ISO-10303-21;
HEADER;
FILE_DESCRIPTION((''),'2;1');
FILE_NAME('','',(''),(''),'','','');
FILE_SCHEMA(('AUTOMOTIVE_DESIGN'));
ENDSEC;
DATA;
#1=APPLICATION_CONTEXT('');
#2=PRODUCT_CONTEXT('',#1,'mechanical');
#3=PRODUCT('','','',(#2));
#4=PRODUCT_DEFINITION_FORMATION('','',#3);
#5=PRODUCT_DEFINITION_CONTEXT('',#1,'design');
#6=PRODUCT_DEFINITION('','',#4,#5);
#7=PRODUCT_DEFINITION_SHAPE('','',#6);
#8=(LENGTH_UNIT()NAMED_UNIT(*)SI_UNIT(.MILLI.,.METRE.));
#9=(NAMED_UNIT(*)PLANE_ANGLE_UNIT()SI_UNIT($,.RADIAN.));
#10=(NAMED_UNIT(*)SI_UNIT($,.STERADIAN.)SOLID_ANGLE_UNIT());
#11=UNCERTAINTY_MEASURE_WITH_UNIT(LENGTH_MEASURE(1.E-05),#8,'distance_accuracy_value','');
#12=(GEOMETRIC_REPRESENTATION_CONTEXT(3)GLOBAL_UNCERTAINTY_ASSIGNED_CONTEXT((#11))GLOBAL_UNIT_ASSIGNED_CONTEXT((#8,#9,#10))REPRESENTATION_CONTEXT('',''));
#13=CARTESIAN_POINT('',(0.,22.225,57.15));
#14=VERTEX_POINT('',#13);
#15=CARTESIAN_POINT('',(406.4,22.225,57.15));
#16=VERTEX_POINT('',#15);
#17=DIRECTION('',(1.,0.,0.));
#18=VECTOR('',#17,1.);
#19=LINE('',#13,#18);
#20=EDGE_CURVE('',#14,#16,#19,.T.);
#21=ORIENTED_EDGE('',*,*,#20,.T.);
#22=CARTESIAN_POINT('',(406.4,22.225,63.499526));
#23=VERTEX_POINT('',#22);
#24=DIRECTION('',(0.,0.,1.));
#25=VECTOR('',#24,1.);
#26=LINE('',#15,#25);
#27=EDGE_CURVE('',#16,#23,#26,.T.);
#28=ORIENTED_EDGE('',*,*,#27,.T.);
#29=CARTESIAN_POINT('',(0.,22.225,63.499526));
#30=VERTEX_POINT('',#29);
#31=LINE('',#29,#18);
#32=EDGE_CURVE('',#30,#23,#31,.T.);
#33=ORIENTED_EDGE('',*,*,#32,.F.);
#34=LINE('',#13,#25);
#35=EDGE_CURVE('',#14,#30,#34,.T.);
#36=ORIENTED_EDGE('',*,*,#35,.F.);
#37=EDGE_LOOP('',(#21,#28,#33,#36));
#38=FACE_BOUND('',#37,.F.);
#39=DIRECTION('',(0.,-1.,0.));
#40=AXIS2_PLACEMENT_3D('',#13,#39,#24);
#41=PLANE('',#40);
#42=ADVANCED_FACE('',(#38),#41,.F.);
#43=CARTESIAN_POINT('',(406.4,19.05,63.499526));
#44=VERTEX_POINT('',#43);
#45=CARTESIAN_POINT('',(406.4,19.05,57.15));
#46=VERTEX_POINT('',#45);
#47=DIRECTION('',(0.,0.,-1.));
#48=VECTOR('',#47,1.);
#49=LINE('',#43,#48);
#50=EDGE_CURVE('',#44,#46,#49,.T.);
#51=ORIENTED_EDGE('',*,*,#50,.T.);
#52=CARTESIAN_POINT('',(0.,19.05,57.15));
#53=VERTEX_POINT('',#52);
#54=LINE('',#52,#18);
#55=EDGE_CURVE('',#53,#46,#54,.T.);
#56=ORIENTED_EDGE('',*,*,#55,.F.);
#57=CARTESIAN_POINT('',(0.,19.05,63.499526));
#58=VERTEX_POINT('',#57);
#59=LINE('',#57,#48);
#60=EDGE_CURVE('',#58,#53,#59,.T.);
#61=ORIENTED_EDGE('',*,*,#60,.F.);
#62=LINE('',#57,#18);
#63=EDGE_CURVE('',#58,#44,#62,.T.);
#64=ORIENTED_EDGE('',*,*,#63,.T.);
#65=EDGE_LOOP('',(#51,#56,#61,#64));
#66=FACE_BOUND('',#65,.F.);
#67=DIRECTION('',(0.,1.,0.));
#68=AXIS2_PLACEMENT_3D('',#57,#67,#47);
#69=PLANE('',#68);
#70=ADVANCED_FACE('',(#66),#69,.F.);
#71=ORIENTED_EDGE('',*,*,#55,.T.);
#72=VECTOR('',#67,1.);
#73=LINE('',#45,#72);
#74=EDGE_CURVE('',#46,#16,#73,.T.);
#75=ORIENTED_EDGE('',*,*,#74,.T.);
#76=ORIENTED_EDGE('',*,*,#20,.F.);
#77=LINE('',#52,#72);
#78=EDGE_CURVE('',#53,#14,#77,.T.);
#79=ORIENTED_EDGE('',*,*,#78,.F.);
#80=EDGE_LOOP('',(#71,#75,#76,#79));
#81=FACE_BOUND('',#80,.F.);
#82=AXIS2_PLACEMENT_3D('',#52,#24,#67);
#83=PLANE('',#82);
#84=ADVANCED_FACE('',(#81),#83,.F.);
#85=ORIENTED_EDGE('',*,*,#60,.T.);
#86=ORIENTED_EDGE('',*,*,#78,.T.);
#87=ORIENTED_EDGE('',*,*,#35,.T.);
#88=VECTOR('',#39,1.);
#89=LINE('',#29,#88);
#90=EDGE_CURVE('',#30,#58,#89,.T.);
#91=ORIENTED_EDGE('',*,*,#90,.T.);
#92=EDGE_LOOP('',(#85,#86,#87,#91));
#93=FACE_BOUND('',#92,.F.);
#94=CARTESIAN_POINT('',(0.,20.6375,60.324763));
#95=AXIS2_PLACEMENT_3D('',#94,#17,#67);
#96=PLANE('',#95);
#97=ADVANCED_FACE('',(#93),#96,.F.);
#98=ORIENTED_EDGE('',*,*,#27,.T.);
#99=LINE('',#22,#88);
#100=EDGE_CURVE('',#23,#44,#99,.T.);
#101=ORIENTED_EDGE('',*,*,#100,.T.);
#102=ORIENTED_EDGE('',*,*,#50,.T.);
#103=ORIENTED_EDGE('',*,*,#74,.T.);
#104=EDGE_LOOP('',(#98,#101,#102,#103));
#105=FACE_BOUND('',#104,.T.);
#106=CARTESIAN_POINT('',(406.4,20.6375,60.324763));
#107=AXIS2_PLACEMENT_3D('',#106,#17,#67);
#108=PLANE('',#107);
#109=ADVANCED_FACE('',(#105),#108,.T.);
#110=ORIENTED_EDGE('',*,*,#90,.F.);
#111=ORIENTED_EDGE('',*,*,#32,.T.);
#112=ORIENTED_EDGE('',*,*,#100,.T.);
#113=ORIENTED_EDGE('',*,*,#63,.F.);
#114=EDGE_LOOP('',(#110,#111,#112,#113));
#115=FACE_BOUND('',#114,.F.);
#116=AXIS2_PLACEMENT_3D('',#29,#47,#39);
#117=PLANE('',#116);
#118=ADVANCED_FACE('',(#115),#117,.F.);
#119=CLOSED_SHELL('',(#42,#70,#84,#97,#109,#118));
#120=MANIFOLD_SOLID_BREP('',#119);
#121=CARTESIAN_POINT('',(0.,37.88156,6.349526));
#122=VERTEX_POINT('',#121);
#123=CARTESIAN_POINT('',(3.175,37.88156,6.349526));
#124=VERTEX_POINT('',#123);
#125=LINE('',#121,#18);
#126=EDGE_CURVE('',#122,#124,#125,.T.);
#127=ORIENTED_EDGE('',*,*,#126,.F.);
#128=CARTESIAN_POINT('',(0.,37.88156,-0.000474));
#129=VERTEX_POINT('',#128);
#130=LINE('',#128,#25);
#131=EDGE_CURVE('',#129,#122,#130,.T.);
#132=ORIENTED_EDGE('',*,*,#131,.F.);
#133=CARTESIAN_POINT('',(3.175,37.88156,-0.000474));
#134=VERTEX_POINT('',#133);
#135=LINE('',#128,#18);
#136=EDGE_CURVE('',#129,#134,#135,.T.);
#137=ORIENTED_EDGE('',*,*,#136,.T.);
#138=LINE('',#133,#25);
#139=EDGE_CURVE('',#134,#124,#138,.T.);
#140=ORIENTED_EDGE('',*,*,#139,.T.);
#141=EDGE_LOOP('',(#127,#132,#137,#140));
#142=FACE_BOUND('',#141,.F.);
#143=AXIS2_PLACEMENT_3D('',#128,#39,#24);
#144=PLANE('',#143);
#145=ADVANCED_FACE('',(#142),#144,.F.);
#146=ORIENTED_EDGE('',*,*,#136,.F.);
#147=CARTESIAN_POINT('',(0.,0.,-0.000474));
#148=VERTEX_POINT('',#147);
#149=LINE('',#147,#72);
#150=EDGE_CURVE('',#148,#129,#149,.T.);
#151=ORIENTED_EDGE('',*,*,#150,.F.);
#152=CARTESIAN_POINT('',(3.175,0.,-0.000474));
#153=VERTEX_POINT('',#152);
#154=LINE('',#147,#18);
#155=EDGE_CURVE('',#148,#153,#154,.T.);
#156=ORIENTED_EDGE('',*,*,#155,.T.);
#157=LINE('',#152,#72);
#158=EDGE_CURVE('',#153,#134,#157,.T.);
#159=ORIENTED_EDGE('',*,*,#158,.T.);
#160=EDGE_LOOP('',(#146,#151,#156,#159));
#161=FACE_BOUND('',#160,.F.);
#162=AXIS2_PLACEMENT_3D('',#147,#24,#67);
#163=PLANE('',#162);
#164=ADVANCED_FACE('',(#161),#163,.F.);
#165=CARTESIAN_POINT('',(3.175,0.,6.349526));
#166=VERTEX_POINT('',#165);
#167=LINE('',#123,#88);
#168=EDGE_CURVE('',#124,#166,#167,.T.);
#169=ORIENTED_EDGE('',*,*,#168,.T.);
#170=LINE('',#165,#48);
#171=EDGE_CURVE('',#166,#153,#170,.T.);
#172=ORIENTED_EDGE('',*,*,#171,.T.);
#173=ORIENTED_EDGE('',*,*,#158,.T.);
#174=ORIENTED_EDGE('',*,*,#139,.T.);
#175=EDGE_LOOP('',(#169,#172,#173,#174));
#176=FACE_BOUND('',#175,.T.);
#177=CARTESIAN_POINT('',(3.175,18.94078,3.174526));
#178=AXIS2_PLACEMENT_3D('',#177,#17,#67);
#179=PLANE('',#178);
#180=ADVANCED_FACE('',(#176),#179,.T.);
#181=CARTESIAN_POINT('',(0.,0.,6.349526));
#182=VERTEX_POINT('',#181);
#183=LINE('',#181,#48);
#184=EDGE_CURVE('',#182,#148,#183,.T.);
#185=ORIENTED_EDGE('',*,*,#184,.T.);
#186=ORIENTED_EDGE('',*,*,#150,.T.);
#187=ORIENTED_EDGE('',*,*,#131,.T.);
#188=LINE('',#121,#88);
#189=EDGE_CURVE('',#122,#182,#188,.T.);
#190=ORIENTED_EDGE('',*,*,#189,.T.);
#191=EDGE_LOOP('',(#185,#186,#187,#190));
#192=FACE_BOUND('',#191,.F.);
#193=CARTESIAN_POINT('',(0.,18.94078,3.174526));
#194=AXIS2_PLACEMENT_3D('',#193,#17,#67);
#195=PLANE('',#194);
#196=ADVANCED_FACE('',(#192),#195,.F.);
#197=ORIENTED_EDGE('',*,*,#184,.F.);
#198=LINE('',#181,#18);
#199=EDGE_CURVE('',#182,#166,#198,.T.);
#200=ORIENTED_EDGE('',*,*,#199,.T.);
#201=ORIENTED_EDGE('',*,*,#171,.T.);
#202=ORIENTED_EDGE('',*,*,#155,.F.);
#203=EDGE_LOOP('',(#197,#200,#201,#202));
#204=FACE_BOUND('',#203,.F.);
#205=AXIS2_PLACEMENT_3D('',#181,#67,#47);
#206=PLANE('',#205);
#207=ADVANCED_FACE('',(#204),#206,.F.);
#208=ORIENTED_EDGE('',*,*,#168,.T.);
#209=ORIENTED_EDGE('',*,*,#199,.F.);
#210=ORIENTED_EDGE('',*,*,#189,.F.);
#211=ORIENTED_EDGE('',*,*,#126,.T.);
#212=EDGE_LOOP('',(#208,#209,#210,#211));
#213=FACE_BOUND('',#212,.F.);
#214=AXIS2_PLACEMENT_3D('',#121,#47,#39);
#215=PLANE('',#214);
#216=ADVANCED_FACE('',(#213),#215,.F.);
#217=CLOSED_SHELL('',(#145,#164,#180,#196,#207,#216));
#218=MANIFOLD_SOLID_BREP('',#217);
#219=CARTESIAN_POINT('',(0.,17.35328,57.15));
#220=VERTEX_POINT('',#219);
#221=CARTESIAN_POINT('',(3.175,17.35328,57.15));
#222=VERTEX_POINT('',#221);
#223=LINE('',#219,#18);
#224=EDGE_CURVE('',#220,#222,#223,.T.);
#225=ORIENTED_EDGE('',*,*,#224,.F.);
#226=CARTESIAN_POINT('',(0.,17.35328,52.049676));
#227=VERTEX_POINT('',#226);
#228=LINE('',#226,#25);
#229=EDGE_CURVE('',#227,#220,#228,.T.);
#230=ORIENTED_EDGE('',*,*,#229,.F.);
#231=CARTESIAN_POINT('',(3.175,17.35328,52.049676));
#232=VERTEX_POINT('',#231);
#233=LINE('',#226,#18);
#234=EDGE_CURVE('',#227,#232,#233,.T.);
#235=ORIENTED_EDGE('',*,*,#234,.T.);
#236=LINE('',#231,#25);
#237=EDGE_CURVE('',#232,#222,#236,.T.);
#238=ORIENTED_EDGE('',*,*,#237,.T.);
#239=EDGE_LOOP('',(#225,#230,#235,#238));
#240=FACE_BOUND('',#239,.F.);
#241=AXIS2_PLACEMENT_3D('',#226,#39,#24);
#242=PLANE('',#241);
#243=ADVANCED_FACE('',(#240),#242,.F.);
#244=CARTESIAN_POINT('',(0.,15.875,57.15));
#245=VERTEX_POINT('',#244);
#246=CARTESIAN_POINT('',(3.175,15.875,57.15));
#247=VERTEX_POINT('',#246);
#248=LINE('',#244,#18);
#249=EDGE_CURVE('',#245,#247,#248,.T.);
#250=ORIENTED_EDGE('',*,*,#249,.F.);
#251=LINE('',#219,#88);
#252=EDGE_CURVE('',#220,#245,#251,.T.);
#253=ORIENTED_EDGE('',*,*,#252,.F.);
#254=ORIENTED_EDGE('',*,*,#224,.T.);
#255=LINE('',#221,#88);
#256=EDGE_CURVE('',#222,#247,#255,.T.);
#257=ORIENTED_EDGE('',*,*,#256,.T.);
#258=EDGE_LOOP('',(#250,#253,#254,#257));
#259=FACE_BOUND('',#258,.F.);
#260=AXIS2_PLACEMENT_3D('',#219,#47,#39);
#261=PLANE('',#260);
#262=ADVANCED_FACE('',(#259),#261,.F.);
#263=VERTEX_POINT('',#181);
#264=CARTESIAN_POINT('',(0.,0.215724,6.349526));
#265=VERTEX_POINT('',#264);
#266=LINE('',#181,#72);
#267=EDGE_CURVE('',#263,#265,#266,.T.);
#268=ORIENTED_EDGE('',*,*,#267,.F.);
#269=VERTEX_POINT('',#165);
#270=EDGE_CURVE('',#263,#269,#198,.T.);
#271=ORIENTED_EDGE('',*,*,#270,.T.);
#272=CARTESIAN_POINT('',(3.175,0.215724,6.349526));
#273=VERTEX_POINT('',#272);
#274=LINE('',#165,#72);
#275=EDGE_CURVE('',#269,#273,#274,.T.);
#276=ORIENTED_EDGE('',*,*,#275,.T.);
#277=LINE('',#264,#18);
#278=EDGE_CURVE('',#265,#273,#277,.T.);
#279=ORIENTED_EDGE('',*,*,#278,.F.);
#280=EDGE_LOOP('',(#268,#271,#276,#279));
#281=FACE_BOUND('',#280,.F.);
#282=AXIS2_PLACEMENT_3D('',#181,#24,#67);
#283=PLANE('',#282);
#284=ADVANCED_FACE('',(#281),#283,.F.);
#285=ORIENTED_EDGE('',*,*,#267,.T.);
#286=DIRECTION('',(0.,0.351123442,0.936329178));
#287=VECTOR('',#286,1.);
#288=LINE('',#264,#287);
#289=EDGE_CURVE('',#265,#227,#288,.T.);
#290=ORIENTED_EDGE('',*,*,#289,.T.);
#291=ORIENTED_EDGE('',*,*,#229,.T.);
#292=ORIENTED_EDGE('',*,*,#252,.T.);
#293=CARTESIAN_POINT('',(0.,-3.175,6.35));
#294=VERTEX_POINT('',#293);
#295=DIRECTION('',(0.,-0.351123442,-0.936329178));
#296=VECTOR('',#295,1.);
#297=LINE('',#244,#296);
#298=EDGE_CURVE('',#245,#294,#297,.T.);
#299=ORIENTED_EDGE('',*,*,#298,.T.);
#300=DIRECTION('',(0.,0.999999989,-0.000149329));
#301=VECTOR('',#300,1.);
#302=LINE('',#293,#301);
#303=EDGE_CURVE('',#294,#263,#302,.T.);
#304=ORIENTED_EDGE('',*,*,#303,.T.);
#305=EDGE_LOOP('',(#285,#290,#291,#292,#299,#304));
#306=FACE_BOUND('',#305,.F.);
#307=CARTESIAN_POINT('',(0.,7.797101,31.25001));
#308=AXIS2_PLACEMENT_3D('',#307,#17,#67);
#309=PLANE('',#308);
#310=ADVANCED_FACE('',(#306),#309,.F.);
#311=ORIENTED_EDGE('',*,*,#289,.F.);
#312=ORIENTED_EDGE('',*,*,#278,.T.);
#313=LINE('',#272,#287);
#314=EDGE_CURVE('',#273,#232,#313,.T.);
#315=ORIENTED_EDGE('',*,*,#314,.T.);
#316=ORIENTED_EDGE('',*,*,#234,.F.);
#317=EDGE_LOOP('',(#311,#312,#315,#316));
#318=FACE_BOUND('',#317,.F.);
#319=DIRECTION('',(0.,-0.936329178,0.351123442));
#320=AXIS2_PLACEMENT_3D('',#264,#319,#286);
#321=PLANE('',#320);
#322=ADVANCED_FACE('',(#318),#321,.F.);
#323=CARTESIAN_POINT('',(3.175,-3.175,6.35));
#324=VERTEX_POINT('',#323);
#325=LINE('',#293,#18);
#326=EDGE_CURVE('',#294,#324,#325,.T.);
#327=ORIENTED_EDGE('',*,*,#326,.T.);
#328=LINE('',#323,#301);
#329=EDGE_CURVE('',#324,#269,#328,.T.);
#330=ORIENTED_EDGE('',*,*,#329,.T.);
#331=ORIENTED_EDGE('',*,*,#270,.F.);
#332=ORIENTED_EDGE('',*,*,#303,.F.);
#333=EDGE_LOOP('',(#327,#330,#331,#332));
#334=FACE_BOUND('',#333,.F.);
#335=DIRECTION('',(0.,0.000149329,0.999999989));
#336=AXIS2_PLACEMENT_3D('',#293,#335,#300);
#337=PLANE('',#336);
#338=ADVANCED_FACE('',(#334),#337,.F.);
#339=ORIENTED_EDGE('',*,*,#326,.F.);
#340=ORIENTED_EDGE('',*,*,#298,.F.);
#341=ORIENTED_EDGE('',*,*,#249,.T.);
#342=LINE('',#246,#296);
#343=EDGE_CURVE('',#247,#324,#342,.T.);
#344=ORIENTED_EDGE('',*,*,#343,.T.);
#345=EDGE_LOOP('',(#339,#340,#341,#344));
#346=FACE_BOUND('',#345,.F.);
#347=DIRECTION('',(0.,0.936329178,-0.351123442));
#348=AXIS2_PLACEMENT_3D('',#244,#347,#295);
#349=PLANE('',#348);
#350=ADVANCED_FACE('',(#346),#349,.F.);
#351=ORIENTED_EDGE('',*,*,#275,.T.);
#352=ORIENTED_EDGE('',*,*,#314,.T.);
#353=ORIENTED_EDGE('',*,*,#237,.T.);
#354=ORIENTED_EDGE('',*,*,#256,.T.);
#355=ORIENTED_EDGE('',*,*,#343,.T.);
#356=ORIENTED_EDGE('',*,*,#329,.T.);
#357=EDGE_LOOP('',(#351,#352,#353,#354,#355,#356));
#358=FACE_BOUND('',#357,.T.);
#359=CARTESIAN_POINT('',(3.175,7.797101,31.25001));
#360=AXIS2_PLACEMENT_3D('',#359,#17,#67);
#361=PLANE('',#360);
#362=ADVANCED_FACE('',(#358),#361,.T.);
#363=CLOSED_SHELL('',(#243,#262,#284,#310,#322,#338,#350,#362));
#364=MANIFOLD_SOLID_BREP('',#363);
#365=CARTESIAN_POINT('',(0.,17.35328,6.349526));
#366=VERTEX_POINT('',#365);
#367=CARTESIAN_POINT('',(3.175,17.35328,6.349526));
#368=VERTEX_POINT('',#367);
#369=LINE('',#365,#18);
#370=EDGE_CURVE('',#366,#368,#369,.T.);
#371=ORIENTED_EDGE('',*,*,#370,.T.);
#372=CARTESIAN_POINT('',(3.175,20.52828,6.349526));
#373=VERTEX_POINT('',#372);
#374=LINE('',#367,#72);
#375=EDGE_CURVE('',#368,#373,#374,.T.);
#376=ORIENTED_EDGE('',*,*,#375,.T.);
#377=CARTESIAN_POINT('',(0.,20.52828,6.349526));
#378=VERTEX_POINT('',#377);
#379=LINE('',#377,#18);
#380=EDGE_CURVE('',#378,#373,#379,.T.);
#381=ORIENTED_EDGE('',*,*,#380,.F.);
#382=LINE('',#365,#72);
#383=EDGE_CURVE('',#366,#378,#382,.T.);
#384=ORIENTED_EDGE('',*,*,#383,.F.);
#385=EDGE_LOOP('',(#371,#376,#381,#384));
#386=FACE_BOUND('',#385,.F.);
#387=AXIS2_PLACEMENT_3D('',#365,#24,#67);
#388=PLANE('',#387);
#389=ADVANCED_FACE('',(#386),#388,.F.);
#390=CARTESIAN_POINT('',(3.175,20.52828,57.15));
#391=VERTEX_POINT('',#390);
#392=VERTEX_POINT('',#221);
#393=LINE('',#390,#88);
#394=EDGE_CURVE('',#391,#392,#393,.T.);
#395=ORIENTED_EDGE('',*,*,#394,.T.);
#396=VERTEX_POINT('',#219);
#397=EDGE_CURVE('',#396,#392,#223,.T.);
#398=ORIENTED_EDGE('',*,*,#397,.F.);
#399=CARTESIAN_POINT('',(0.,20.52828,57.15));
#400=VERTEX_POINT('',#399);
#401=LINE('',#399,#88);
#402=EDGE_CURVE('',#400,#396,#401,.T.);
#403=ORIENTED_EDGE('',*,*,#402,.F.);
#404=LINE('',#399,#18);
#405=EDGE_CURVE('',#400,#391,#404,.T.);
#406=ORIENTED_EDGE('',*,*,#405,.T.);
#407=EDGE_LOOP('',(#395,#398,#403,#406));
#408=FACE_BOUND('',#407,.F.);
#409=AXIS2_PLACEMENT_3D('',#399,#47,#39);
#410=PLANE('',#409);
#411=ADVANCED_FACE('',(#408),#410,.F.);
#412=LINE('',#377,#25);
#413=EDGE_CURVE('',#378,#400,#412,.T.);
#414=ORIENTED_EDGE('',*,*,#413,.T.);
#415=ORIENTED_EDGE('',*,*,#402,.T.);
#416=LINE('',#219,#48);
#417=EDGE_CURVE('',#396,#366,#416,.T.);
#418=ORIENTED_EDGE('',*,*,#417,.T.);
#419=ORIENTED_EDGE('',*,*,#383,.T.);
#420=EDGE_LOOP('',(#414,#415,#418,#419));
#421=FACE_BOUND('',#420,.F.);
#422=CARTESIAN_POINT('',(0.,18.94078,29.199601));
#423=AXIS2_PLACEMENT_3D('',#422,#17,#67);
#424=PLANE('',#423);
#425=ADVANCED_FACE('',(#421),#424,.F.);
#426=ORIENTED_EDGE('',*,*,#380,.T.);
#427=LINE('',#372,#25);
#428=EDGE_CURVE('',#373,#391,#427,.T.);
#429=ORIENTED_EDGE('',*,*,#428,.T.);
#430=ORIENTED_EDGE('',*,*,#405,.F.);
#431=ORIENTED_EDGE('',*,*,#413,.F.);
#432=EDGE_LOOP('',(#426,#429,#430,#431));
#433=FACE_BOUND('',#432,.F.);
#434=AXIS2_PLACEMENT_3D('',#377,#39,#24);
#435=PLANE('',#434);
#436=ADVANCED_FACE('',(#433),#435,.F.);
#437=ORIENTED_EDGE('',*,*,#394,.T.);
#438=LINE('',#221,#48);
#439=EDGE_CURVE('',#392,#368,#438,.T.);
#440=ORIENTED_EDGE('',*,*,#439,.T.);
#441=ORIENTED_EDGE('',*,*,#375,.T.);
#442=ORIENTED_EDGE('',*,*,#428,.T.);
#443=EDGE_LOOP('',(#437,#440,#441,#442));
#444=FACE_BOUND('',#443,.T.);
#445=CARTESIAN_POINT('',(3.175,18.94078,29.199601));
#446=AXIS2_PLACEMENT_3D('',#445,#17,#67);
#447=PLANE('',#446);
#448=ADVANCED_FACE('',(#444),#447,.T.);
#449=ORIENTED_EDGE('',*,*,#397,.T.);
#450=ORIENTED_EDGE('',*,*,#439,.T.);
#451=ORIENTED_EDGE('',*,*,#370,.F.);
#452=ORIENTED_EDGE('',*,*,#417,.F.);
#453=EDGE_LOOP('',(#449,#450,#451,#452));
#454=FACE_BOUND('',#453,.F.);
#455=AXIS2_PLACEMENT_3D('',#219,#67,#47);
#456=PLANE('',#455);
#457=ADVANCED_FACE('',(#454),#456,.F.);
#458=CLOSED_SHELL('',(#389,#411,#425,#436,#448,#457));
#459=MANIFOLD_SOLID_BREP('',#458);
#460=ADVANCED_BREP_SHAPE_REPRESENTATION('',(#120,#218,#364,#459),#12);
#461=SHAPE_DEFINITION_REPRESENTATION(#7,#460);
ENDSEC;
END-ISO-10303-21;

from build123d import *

# Parameters (mm, degrees)
F1_DEPTH = 406.4
F2_DEPTH = 3.175
F3_DEPTH = 3.175
F4_DEPTH = 3.175


# Not quite as in the source:
# - a feature names something its author has since deleted; it is built from what else it names


with BuildPart() as f1:
    # F0 (on Right) → F1 (new body)
    with BuildSketch(Plane.YZ):
        Polygon((20.52828, 57.15), (22.225, 57.15), (22.225, 63.4995258801), (19.05, 63.4995258801), (19.05, 57.15), align=None)
    extrude(amount=F1_DEPTH)


with BuildPart() as f2:
    # F0 (on Right) → F2 (new body)
    with BuildSketch(Plane.YZ):
        Polygon((-3.175, 6.35), (0, 6.3495258801), (0.2157236914, 6.3495258801), (17.35328, 52.0496760362), (17.35328, 57.15), (15.875, 57.15), align=None)
    extrude(amount=F2_DEPTH)


with BuildPart() as f3:
    # F0 (on Right) → F3 (new body)
    with BuildSketch(Plane.YZ):
        Polygon((0, 6.3495258801), (0, -0.0004741199), (37.88156, -0.0004741199), (37.88156, 6.3495258801), (37.4691675524, 6.3495258801), (20.52828, 6.3495258801), (18.94078, 6.3495258801), (17.35328, 6.3495258801), (0.2157236914, 6.3495258801), align=None)
    extrude(amount=F3_DEPTH)


with BuildPart() as f4:
    # F0 (on Right) → F4 (new body)
    with BuildSketch(Plane.YZ):
        Polygon((17.35328, 52.0496760362), (17.35328, 6.3495258801), (18.94078, 6.3495258801), (20.52828, 6.3495258801), (20.52828, 52.0496760362), align=None)
        Polygon((17.35328, 57.15), (17.35328, 52.0496760362), (20.52828, 52.0496760362), (20.52828, 57.15), (19.05, 57.15), align=None)
    extrude(amount=F4_DEPTH)


solid = Compound([f1.part, f2.part, f3.part, f4.part])
